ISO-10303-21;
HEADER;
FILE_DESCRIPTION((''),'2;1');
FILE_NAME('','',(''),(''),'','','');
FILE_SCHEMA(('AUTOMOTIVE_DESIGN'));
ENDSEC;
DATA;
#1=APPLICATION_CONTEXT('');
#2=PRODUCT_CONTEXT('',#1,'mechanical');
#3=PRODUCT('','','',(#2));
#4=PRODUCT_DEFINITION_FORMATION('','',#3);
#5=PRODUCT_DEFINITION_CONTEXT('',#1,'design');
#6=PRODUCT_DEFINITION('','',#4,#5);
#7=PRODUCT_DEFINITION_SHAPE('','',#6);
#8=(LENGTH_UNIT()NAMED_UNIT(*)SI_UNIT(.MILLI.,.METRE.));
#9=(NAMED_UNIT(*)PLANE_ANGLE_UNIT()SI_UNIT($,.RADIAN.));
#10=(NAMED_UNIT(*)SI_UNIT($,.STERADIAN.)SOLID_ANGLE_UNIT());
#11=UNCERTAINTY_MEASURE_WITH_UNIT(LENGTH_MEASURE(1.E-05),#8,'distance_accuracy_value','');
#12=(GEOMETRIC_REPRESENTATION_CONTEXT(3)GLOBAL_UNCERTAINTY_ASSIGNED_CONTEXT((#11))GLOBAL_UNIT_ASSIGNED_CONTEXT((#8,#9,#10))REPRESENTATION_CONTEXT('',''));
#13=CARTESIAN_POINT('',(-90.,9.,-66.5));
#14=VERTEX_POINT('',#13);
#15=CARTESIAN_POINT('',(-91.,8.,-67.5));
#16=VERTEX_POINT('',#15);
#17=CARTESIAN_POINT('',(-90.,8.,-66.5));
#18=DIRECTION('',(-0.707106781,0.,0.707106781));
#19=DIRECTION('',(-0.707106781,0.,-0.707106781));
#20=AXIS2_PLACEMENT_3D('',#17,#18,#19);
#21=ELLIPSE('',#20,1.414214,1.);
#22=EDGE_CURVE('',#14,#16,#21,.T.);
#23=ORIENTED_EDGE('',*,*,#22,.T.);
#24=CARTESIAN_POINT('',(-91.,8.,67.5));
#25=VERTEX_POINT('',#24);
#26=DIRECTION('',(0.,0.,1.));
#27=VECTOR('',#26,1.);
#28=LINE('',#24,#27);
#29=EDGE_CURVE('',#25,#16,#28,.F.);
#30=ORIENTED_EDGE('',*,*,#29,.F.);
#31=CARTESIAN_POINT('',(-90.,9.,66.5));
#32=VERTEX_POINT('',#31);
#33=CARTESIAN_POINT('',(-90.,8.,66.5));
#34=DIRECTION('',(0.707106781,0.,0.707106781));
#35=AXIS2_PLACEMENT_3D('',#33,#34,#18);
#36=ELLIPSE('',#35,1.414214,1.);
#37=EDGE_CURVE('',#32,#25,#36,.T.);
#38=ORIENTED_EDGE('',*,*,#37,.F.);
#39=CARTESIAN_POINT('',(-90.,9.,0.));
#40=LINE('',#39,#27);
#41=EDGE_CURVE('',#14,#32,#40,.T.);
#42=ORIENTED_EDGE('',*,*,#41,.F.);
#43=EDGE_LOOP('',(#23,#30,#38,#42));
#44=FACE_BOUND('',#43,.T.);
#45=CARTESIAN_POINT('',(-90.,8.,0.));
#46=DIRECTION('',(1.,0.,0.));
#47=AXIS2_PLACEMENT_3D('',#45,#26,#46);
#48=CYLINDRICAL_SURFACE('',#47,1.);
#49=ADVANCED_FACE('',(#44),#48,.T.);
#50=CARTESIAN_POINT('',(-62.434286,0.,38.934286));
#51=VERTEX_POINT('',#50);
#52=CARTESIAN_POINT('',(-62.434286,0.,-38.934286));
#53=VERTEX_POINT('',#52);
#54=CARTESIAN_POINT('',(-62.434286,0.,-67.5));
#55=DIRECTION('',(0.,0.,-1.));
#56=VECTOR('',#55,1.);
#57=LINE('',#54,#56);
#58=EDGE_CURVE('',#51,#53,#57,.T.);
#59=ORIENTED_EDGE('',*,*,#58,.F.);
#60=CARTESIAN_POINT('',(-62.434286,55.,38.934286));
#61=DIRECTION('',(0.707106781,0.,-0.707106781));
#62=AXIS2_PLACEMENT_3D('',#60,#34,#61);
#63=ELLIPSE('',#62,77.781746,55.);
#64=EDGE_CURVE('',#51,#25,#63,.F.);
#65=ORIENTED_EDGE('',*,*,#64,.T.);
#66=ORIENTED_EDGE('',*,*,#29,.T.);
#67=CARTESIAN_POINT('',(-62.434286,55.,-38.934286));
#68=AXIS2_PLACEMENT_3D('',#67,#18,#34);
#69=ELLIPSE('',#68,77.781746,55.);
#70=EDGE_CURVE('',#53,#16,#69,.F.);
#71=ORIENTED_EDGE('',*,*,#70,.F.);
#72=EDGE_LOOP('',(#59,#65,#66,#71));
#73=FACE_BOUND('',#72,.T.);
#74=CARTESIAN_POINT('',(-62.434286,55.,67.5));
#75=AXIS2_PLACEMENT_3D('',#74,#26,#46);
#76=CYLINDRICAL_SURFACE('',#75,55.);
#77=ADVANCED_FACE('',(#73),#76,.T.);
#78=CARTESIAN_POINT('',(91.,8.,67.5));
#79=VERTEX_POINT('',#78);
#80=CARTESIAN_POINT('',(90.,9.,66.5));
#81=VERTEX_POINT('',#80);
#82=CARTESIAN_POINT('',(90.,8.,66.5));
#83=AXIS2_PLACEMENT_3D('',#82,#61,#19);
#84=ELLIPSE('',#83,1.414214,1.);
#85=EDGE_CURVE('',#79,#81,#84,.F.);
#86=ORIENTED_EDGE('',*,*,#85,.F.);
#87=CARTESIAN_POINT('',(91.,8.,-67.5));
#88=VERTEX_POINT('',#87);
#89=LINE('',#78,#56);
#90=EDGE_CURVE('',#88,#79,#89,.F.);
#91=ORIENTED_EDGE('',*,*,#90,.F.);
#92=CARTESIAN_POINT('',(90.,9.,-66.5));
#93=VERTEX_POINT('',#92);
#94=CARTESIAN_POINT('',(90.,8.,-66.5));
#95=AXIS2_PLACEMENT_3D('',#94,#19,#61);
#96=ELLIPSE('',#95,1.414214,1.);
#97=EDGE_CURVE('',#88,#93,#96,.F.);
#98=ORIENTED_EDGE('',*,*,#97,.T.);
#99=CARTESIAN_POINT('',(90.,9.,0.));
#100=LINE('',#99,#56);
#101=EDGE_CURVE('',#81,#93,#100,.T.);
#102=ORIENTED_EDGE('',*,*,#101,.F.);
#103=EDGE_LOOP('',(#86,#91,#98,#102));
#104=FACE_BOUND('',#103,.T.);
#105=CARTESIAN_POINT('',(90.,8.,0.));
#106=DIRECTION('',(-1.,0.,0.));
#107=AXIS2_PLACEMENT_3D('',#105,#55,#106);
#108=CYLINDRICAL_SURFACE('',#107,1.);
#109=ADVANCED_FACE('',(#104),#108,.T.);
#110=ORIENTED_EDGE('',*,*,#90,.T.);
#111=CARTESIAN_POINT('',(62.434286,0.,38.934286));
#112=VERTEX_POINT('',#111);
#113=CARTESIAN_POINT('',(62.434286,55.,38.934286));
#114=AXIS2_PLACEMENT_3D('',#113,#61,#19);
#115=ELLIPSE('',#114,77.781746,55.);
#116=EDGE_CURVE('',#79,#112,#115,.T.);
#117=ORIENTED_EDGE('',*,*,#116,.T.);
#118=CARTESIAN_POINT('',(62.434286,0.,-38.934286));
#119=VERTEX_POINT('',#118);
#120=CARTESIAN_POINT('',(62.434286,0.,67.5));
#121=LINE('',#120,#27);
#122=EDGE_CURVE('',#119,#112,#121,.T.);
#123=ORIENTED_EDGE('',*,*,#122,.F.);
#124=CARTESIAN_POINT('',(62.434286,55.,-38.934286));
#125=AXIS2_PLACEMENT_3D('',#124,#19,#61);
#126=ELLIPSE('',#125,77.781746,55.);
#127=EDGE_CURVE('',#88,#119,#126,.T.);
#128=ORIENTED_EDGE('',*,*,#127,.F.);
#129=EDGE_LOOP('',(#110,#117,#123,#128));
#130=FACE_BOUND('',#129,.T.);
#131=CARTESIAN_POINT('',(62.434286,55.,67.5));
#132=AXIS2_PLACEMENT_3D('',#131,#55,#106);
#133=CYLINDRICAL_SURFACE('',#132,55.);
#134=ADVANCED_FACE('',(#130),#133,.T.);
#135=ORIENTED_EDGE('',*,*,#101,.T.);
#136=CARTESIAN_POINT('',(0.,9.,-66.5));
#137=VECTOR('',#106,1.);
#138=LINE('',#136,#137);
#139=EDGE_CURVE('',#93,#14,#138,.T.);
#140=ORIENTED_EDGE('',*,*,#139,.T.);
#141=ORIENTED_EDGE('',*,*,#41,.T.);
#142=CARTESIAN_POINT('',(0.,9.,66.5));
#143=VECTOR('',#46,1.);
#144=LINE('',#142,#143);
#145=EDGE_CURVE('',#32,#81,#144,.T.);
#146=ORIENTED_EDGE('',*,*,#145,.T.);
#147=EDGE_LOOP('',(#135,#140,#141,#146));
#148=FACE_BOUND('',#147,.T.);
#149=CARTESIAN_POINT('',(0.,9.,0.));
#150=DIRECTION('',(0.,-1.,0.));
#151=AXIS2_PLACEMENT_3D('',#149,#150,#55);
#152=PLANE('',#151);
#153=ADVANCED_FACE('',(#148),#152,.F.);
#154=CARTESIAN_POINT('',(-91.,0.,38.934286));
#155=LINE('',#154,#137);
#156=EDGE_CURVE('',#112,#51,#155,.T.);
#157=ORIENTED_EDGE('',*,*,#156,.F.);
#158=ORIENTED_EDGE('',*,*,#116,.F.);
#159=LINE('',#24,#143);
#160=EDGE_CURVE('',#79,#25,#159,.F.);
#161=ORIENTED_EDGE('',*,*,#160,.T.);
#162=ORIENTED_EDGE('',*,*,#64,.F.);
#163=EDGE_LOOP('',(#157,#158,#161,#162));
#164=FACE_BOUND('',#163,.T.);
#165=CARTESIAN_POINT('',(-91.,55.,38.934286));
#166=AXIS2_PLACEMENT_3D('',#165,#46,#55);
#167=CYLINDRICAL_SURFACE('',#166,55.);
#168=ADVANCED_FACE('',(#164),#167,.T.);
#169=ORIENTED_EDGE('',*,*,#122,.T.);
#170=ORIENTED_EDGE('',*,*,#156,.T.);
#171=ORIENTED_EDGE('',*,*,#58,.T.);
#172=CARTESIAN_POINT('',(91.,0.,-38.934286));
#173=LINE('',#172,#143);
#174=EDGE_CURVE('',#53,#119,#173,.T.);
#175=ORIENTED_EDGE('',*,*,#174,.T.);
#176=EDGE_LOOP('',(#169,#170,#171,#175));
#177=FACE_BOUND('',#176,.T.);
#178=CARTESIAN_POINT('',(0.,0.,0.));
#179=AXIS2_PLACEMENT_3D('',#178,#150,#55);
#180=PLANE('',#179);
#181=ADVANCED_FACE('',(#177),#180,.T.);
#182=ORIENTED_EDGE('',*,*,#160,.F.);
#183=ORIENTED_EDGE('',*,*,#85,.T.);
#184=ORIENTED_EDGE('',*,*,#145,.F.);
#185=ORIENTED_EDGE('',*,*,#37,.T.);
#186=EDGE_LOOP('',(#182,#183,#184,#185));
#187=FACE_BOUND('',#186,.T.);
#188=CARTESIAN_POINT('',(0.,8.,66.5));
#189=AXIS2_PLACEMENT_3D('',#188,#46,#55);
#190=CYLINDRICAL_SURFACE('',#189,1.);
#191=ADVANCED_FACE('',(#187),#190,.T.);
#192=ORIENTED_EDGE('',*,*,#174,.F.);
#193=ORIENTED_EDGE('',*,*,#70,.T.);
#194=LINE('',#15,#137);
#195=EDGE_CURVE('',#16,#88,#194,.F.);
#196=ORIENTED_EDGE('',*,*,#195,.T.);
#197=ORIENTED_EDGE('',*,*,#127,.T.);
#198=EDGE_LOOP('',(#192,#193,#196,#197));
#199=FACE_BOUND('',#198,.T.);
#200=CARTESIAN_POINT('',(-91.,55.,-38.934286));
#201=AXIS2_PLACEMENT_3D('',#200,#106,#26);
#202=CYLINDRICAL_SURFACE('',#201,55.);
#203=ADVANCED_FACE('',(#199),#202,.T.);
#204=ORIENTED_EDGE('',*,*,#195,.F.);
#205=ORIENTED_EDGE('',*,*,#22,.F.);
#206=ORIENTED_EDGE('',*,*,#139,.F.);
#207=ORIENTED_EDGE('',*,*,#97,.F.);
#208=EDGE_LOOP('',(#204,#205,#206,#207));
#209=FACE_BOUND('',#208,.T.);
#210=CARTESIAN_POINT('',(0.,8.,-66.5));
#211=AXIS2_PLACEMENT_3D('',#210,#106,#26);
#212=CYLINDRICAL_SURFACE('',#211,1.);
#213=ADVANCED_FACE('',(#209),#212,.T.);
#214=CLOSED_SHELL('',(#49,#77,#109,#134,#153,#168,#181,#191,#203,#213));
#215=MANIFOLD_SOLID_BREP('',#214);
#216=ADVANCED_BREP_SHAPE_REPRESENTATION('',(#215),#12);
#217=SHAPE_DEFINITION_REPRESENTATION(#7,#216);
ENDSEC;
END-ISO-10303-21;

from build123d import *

# Parameters (mm, degrees)
SKETCH1_W           = 182
SKETCH1_H           = 135
BOSS_EXTRUDE1_DEPTH = 9
FILLET4_R           = 1
FILLET5_R           = 55


with BuildPart() as part:
    # Sketch1 → Boss-Extrude1 (new body)
    with BuildSketch(Plane(origin=(0, 0, 0), x_dir=(1, 0, 0), z_dir=(0, 1, 0))):
        Rectangle(SKETCH1_W, SKETCH1_H)
    extrude(amount=BOSS_EXTRUDE1_DEPTH)

    # Fillet4
    fillet4_edges = [part.edges().sort_by_distance(p)[0] for p in [
        (-91, 9, 0),
        (0, 9, 67.5),
        (91, 9, 0),
        (0, 9, -67.5),
    ]]
    fillet(fillet4_edges, radius=FILLET4_R)

    # Fillet5
    # the kernel refuses this fillet: 55 mm, written as the material it takes off along each edge
    with BuildSketch(Plane(origin=(162.414284285, 0, -67.5), x_dir=(0, 0, 1), z_dir=(-1, 0, 0))) as fillet5_piece_1:
        with BuildLine():
            CenterArc((28.565713714, 55), FILLET5_R, 238.709554786, 31.290445214)
            Line((0, 8), (0, 0))
            Line((0, 0), (28.565713714, 0))
        make_face()
    extrude(amount=324.828568571, mode=Mode.SUBTRACT)
    with BuildSketch(Plane(origin=(-91, 0, -138.914284285), x_dir=(0, 1, 0), z_dir=(0, 0, 1))) as fillet5_piece_2:
        with BuildLine():
            CenterArc((55, -28.565713714), FILLET5_R, 148.709554786, 31.290445214)
            Line((0, -28.565713714), (0, 0))
            Line((0, 0), (8, 0))
        make_face()
    extrude(amount=277.828568571, mode=Mode.SUBTRACT)
    with BuildSketch(Plane(origin=(-162.414284285, 0, 67.5), x_dir=(0, 1, 0), z_dir=(1, 0, 0))) as fillet5_piece_3:
        with BuildLine():
            CenterArc((55, -28.565713714), FILLET5_R, 148.709554786, 31.290445214)
            Line((0, -28.565713714), (0, 0))
            Line((0, 0), (8, 0))
        make_face()
    extrude(amount=324.828568571, mode=Mode.SUBTRACT)
    with BuildSketch(Plane(origin=(91, 0, 138.914284285), x_dir=(-1, 0, 0), z_dir=(0, 0, -1))) as fillet5_piece_4:
        with BuildLine():
            CenterArc((28.565713714, 55), FILLET5_R, 238.709554786, 31.290445214)
            Line((0, 8), (0, 0))
            Line((0, 0), (28.565713714, 0))
        make_face()
    extrude(amount=277.828568571, mode=Mode.SUBTRACT)


solid = part.part
